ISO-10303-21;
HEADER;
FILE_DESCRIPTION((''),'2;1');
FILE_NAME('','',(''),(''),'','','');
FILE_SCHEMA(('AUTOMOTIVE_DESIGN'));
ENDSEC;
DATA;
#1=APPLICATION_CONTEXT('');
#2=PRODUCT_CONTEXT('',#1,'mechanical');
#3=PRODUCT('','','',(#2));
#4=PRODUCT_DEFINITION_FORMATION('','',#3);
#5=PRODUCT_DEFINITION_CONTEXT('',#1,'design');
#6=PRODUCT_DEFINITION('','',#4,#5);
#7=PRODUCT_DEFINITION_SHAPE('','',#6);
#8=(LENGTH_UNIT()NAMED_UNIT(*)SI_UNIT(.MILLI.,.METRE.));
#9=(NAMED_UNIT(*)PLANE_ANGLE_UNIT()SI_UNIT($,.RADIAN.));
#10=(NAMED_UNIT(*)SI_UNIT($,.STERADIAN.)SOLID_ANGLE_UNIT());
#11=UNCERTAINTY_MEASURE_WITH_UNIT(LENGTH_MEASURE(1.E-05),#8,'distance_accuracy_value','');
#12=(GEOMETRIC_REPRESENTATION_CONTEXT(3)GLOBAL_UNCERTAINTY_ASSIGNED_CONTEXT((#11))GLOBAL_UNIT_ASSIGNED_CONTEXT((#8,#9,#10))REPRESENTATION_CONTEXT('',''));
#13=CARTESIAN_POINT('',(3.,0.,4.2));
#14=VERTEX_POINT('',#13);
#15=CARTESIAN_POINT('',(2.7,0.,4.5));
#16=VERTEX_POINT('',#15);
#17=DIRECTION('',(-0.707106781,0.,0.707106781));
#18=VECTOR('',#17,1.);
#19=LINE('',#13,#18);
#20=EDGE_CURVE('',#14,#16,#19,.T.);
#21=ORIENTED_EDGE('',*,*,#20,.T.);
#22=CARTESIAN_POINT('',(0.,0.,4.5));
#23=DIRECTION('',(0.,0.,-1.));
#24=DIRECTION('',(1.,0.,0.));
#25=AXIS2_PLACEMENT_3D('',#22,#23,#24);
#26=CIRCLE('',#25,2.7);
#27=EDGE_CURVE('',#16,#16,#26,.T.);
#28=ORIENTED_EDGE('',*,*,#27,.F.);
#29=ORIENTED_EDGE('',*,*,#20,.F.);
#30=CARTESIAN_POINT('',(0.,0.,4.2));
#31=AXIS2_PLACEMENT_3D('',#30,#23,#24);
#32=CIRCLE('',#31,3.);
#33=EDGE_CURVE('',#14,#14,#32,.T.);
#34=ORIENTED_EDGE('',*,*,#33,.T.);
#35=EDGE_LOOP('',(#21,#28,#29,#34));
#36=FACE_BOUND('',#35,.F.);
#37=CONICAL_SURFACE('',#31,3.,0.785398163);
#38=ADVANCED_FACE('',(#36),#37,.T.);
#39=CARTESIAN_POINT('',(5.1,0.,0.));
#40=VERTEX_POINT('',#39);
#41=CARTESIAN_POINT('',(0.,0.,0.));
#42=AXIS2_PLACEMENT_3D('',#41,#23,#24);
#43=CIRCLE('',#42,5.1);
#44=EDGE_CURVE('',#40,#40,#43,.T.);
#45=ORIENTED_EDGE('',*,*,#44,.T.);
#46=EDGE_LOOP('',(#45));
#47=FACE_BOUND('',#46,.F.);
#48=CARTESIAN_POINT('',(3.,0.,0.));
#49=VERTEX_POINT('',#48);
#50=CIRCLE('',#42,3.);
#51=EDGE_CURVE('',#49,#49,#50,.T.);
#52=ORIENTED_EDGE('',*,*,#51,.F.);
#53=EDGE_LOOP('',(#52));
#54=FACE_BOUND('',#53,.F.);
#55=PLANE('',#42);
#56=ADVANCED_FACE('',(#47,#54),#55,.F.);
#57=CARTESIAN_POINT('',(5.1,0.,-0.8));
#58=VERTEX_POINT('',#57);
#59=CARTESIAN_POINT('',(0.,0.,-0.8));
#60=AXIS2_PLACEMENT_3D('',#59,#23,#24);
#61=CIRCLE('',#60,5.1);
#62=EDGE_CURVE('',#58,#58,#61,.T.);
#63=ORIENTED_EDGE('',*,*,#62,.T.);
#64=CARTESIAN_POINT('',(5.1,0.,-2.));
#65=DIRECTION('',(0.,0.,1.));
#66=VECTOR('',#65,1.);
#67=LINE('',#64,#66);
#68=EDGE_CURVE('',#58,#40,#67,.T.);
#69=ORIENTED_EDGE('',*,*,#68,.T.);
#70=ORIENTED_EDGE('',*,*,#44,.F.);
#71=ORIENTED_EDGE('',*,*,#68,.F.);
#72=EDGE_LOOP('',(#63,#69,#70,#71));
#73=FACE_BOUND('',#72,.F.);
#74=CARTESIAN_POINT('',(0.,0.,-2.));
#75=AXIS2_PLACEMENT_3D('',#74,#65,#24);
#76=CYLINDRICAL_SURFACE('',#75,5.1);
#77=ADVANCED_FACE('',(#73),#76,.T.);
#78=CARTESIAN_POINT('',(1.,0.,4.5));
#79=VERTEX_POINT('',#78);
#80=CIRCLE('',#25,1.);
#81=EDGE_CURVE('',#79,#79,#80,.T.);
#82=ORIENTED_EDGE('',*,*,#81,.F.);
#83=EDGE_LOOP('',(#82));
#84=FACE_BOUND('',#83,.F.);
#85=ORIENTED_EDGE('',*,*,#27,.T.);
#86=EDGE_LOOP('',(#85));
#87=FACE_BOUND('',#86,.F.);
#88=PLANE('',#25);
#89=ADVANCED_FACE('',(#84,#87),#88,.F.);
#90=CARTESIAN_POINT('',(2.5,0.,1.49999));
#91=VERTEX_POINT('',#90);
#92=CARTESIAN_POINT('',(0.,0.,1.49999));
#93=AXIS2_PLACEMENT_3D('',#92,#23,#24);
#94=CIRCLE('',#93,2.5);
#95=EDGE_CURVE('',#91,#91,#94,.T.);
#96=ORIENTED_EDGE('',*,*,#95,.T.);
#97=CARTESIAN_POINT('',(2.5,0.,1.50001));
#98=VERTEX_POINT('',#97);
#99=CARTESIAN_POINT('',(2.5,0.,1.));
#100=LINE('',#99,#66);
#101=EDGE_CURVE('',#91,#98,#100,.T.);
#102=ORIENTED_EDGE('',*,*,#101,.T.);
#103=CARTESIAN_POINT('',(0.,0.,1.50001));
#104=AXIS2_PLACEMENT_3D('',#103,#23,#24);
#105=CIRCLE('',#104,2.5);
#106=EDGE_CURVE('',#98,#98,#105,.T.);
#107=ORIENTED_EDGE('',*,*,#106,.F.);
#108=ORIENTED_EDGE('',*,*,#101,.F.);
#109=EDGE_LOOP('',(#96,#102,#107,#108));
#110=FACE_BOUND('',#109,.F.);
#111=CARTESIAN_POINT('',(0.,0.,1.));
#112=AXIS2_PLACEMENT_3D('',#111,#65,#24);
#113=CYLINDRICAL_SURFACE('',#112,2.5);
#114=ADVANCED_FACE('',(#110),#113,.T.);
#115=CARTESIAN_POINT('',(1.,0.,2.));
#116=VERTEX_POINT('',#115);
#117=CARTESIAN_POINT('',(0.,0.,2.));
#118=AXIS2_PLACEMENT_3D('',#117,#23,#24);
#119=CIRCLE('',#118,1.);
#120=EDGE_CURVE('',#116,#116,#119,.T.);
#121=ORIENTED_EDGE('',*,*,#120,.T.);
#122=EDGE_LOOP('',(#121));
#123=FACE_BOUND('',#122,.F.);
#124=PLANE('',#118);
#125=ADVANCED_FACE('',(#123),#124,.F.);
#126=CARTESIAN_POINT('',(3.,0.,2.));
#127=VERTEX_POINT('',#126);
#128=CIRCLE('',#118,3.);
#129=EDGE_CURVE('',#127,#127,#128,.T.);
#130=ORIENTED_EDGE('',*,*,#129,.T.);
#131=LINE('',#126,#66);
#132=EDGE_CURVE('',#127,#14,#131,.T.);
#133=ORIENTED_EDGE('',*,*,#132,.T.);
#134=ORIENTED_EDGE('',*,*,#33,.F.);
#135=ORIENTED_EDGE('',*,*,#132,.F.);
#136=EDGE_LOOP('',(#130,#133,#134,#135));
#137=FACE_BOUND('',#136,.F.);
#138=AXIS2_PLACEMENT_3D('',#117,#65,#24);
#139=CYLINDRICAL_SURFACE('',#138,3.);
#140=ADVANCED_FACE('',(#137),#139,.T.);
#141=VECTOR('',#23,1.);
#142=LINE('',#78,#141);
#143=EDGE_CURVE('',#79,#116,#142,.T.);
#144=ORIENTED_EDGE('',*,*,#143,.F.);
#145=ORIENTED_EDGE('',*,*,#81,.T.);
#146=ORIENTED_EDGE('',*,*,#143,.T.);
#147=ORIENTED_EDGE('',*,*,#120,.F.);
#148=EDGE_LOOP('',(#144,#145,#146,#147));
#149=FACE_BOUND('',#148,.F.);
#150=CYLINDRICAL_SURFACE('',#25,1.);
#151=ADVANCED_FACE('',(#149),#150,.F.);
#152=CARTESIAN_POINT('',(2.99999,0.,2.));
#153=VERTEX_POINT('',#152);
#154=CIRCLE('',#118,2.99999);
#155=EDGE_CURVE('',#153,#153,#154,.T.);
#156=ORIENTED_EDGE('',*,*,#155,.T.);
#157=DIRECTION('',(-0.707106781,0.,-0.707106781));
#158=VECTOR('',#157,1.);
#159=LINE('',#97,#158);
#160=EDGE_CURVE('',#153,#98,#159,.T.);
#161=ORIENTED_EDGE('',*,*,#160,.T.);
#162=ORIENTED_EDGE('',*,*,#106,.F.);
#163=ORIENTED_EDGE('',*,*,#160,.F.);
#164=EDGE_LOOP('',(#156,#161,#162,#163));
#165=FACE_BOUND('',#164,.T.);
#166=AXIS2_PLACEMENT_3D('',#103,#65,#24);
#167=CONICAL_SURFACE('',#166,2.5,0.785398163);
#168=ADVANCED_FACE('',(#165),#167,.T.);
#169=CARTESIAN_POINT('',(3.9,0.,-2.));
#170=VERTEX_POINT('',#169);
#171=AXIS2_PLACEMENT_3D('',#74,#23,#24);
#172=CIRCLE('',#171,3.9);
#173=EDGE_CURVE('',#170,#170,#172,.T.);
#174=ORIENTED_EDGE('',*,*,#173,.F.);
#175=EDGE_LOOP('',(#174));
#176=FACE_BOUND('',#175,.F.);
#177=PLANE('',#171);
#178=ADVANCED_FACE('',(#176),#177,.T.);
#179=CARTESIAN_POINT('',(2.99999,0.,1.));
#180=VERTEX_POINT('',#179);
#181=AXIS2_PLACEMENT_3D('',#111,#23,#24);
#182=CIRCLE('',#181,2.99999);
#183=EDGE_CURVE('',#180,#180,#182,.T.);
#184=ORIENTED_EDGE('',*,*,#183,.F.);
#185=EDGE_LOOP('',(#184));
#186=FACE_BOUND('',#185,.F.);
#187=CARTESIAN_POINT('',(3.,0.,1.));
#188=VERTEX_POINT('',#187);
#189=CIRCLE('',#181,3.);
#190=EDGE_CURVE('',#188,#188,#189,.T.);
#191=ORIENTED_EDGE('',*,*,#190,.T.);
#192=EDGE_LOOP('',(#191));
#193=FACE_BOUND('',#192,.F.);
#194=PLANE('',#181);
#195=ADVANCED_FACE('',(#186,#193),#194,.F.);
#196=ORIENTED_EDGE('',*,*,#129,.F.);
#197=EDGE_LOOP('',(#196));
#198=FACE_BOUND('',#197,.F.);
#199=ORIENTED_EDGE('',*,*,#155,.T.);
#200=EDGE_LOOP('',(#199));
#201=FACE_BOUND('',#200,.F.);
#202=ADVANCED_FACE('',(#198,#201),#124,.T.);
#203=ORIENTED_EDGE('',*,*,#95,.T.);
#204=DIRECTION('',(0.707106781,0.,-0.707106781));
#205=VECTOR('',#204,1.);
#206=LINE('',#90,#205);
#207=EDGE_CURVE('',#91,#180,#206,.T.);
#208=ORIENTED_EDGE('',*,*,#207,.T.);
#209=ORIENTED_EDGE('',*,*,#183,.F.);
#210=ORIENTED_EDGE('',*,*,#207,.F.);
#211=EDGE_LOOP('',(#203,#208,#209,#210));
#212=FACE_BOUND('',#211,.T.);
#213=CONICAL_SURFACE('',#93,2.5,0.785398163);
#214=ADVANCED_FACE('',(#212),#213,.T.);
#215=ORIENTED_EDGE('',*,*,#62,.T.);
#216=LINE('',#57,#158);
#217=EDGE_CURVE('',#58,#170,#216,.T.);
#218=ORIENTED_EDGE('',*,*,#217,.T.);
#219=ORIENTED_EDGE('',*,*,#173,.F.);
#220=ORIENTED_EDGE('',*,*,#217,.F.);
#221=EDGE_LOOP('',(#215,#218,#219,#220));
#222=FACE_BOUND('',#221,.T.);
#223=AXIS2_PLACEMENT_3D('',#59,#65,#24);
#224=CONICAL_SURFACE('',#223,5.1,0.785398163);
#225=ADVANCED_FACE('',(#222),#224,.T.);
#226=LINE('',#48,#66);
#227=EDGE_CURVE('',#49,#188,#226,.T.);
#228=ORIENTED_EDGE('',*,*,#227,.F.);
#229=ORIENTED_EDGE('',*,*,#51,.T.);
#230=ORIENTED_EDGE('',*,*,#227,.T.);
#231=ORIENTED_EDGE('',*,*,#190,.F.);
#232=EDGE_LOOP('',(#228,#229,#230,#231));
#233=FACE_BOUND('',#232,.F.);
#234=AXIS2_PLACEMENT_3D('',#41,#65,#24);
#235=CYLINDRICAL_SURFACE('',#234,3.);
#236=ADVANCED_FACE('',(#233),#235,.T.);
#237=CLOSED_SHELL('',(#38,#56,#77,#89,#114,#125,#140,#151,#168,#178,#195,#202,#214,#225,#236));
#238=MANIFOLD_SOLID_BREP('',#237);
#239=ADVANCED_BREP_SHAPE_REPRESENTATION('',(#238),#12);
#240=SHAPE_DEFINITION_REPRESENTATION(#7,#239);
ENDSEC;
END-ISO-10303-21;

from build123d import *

# Parameters (mm, degrees)
F2_SIZE = 0.3
F3_SIZE = 0.49999
F4_SIZE = 1.2


# Not quite as in the source:
# - a fillet or chamfer is up to 0.001 mm smaller than in the source, because OpenCascade refuses the exact size


with BuildPart() as f1:
    # F0 (on Front) → F1 (revolve)
    with BuildSketch(Plane.XZ):
        Polygon((5.1, -2), (5.1, 0), (3, 0), (3, 1), (2.5, 1), (2.5, 2), (3, 2), (3, 4.5), (1, 4.5), (1, 2), (0, 2), (0, 0), (0, -2), align=None)
    revolve(axis=Axis((0, 0, -1), (0, 0, -1)))

    # F2
    f2_edges = [f1.edges().sort_by_distance(p)[0] for p in [
        (-3, 0, 4.5),
    ]]
    chamfer(f2_edges, length=F2_SIZE)

    # F3 (size 0.5 in the source; OpenCascade refuses exactly that, so slightly less here)
    f3_edges = [f1.edges().sort_by_distance(p)[0] for p in [
        (-2.5, 0, 2),
        (-2.5, 0, 1),
    ]]
    chamfer(f3_edges, length=F3_SIZE)

    # F4
    f4_edges = [f1.edges().sort_by_distance(p)[0] for p in [
        (-5.1, 0, -2),
    ]]
    chamfer(f4_edges, length=F4_SIZE)


solid = f1.part
